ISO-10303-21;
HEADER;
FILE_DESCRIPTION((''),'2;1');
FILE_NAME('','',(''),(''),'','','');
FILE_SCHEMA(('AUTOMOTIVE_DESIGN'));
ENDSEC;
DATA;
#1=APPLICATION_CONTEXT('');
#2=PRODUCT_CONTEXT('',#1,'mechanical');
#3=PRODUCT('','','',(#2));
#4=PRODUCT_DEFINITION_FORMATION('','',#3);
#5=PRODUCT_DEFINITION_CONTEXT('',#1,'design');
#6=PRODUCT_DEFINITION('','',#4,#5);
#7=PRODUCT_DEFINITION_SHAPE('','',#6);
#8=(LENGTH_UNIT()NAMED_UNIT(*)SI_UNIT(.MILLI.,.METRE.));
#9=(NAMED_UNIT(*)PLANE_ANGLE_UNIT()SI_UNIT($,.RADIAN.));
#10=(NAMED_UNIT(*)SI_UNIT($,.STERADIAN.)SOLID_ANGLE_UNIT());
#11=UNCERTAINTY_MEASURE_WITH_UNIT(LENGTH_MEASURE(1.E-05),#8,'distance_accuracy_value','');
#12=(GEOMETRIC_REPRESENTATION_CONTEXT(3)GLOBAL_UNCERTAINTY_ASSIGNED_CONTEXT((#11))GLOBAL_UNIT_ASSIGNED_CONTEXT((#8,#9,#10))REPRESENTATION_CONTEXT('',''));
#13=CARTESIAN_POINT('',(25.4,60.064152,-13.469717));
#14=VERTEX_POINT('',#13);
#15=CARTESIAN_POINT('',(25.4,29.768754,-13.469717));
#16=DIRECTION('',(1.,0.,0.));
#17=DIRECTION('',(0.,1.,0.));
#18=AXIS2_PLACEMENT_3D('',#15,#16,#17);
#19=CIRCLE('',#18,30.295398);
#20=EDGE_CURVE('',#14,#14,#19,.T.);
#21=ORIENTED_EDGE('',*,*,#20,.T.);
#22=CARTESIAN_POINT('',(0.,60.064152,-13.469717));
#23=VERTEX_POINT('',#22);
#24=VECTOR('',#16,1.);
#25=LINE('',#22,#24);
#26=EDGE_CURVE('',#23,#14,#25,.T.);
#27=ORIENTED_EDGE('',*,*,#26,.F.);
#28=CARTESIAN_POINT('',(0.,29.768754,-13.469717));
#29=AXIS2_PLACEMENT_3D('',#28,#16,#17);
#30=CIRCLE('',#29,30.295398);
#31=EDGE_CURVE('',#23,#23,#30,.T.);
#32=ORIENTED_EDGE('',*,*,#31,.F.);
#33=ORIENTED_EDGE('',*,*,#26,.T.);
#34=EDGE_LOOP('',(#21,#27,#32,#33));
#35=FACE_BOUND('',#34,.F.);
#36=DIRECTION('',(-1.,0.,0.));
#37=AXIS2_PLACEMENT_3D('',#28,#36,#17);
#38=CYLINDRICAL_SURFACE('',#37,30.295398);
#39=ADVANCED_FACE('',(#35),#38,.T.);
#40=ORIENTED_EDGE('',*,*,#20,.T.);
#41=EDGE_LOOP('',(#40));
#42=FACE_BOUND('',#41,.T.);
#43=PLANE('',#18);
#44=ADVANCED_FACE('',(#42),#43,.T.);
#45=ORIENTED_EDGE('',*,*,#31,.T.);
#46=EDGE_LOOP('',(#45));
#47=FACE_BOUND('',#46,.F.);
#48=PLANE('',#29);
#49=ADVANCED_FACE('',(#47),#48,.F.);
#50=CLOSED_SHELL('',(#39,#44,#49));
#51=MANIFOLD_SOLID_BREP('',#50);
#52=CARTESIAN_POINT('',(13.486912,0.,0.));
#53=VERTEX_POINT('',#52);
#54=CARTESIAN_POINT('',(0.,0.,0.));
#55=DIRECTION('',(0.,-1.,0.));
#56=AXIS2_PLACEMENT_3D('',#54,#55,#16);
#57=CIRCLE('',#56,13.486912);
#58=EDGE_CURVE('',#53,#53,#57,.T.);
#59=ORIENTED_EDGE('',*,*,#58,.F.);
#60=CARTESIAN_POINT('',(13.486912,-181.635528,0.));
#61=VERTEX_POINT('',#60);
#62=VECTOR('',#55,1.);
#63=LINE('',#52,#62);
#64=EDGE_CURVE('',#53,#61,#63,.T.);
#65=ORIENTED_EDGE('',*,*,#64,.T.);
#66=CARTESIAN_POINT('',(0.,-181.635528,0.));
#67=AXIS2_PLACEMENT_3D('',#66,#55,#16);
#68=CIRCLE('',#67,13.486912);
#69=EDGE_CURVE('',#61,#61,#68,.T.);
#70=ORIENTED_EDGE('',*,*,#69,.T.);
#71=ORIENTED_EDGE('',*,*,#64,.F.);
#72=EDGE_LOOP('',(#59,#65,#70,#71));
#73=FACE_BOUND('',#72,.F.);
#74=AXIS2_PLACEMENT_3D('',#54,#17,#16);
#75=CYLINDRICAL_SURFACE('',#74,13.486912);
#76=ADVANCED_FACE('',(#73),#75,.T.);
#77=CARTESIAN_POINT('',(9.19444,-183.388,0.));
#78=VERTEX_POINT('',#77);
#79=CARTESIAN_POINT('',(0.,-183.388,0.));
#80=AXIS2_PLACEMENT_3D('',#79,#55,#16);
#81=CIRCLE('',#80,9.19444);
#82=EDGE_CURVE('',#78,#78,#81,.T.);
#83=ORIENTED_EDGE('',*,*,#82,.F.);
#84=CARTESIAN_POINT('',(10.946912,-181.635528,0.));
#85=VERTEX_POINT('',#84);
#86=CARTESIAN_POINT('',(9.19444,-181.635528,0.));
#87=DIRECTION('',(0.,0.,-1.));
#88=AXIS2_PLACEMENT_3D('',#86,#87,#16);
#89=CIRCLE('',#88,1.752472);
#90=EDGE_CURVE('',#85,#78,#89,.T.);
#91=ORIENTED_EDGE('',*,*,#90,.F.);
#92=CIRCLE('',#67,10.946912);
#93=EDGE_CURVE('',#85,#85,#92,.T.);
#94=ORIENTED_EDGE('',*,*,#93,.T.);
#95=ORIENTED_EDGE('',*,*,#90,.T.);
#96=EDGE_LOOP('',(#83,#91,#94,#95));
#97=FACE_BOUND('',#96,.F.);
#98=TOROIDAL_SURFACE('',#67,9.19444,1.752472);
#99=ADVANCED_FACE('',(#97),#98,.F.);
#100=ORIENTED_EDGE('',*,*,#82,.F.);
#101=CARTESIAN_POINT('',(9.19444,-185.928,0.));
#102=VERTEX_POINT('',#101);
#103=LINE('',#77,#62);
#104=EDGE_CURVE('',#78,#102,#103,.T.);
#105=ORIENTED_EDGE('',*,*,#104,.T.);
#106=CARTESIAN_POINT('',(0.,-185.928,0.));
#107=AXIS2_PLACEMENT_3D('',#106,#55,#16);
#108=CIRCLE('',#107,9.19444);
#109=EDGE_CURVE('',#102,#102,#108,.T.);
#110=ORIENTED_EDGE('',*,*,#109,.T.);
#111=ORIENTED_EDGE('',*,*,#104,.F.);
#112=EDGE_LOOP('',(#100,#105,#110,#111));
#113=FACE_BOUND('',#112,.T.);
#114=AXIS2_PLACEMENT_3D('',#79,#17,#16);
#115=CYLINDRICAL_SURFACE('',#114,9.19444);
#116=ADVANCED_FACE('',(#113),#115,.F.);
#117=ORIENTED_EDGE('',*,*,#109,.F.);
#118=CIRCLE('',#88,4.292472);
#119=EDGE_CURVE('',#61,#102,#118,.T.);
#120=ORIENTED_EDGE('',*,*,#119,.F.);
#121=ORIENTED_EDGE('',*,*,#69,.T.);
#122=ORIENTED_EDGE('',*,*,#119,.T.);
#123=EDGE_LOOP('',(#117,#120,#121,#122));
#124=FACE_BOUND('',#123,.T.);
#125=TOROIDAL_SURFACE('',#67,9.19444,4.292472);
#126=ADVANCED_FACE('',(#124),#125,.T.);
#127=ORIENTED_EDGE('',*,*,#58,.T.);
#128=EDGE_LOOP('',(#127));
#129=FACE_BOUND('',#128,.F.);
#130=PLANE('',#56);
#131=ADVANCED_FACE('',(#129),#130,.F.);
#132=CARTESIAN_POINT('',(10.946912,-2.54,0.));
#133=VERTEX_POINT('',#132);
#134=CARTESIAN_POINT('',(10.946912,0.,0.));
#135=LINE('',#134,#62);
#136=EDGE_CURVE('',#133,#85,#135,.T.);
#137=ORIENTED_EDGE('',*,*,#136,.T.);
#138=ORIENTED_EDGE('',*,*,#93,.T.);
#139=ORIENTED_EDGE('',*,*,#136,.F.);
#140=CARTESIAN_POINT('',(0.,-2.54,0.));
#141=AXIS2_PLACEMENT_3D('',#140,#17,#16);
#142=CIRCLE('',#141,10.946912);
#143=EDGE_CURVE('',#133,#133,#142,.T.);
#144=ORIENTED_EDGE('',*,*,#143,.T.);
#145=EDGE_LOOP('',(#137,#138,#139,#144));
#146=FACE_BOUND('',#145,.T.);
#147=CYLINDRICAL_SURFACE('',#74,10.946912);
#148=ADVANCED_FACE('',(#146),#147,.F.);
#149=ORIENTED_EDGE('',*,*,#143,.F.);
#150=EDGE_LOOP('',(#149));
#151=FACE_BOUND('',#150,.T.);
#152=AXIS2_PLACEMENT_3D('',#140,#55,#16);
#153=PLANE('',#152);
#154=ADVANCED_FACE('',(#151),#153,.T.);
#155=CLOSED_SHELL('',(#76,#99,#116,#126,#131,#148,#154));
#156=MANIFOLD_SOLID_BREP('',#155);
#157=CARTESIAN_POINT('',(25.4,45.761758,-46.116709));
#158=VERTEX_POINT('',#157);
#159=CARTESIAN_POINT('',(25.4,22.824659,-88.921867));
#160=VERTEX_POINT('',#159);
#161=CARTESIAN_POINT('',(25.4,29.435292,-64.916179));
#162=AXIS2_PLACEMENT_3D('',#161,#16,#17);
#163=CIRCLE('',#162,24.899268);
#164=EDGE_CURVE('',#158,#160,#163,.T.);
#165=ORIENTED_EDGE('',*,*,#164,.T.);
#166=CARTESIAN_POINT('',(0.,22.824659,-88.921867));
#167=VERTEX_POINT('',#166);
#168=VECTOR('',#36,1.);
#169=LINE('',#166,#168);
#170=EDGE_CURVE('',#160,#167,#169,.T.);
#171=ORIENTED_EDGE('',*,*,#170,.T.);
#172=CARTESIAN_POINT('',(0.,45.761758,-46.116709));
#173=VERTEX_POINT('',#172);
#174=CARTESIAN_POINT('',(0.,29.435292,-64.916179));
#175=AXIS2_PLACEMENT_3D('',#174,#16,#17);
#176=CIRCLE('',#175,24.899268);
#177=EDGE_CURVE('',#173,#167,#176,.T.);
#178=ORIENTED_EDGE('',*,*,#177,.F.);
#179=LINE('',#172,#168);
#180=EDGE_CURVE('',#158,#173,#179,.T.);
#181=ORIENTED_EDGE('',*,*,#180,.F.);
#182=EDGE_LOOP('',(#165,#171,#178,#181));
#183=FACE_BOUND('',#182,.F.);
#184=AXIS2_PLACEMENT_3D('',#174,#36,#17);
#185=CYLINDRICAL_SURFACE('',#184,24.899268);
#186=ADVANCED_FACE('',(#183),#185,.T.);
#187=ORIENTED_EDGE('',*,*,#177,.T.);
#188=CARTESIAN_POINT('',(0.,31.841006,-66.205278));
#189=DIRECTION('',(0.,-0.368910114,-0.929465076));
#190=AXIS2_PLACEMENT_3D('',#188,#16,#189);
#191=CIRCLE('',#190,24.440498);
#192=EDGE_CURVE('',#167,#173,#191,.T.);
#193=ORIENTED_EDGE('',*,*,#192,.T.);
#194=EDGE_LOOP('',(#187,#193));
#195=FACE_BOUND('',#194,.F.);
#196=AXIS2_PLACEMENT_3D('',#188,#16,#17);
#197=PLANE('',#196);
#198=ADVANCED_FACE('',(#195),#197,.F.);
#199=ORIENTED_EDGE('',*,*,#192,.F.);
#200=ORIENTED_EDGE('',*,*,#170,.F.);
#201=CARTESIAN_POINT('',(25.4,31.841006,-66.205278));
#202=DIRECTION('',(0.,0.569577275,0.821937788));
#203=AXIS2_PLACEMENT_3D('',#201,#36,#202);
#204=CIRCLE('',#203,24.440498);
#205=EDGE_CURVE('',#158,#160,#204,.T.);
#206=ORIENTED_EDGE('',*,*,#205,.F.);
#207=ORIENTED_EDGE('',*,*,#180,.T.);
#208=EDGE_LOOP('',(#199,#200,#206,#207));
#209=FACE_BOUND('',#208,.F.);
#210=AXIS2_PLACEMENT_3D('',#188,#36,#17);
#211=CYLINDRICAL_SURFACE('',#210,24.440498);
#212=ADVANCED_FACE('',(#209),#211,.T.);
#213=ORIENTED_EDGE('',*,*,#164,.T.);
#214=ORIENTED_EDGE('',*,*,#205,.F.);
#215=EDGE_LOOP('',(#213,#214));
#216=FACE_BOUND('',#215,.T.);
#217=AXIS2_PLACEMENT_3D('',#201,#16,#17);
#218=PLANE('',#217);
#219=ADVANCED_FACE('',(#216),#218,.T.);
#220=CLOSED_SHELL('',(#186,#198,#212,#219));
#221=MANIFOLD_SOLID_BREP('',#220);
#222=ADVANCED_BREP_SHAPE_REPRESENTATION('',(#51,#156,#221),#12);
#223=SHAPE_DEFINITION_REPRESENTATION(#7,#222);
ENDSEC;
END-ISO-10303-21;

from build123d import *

# Parameters (mm, degrees)
F0_R      = 13.4869119151
F1_DEPTH  = 185.928
F2_R      = 4.2924717139
F3_T      = -2.54
F4_R      = 24.8992678704
F5_DEPTH  = 25.4
F6_R      = 24.4404976371
F5_FACE_R = 24.8992678704
F7_DEPTH  = 25.4
F8_R      = 30.2953984927
F9_DEPTH  = 25.4


# Not quite as in the source:
# - a shell that OpenCascade refuses in one call is made with other operations: the cavity is built on its own and cut out


with BuildPart() as f1:
    # F0 (on Front) → F1 (new body)
    with BuildSketch(Plane.XZ):
        Circle(F0_R)
    extrude(amount=F1_DEPTH)

    # F2
    f2_edges = [f1.edges().sort_by_distance(p)[0] for p in [
        (-13.486912, -185.928, 0),
    ]]
    fillet(f2_edges, radius=F2_R)

    # F3: a shell. OpenCascade refuses it in one call, so the cavity is built on its own and cut out:
    # the body offset inwards by the wall thickness, plus a prism from it out through each open face.
    f3_core = offset(f1.part, amount=F3_T, mode=Mode.PRIVATE)
    f3_exits = [f3_core.faces().sort_by_distance(p)[0] for p in [
        (0, -183.388, 0),
    ]]
    add(f3_core, mode=Mode.SUBTRACT)
    extrude(f3_exits, amount=-F3_T, mode=Mode.SUBTRACT)


with BuildPart() as f5:
    # F4 (on Right) → F5 (new body)
    with BuildSketch(Plane.YZ):
        with Locations((29.4352918863, -64.9161785841)):
            Circle(F4_R)
    extrude(amount=F5_DEPTH)

    # F6 (on Right) + F5_face (on face) → F7 (join)
    with BuildSketch(Plane.YZ):
        with Locations((31.84100613, -66.205278039)):
            Circle(F6_R)
    with BuildSketch(Plane(origin=(0, 29.4352918863, -64.9161785841), x_dir=(0, 1, 0), z_dir=(-1, 0, 0))):
        Circle(F5_FACE_R)
    extrude(amount=F7_DEPTH, dir=(1, 0, 0))


with BuildPart() as f9:
    # F8 (on Right) → F9 (new body)
    with BuildSketch(Plane.YZ):
        with Locations((29.7687537968, -13.4697174653)):
            Circle(F8_R)
    extrude(amount=F9_DEPTH)


solid = Compound([f1.part, f5.part, f9.part])
